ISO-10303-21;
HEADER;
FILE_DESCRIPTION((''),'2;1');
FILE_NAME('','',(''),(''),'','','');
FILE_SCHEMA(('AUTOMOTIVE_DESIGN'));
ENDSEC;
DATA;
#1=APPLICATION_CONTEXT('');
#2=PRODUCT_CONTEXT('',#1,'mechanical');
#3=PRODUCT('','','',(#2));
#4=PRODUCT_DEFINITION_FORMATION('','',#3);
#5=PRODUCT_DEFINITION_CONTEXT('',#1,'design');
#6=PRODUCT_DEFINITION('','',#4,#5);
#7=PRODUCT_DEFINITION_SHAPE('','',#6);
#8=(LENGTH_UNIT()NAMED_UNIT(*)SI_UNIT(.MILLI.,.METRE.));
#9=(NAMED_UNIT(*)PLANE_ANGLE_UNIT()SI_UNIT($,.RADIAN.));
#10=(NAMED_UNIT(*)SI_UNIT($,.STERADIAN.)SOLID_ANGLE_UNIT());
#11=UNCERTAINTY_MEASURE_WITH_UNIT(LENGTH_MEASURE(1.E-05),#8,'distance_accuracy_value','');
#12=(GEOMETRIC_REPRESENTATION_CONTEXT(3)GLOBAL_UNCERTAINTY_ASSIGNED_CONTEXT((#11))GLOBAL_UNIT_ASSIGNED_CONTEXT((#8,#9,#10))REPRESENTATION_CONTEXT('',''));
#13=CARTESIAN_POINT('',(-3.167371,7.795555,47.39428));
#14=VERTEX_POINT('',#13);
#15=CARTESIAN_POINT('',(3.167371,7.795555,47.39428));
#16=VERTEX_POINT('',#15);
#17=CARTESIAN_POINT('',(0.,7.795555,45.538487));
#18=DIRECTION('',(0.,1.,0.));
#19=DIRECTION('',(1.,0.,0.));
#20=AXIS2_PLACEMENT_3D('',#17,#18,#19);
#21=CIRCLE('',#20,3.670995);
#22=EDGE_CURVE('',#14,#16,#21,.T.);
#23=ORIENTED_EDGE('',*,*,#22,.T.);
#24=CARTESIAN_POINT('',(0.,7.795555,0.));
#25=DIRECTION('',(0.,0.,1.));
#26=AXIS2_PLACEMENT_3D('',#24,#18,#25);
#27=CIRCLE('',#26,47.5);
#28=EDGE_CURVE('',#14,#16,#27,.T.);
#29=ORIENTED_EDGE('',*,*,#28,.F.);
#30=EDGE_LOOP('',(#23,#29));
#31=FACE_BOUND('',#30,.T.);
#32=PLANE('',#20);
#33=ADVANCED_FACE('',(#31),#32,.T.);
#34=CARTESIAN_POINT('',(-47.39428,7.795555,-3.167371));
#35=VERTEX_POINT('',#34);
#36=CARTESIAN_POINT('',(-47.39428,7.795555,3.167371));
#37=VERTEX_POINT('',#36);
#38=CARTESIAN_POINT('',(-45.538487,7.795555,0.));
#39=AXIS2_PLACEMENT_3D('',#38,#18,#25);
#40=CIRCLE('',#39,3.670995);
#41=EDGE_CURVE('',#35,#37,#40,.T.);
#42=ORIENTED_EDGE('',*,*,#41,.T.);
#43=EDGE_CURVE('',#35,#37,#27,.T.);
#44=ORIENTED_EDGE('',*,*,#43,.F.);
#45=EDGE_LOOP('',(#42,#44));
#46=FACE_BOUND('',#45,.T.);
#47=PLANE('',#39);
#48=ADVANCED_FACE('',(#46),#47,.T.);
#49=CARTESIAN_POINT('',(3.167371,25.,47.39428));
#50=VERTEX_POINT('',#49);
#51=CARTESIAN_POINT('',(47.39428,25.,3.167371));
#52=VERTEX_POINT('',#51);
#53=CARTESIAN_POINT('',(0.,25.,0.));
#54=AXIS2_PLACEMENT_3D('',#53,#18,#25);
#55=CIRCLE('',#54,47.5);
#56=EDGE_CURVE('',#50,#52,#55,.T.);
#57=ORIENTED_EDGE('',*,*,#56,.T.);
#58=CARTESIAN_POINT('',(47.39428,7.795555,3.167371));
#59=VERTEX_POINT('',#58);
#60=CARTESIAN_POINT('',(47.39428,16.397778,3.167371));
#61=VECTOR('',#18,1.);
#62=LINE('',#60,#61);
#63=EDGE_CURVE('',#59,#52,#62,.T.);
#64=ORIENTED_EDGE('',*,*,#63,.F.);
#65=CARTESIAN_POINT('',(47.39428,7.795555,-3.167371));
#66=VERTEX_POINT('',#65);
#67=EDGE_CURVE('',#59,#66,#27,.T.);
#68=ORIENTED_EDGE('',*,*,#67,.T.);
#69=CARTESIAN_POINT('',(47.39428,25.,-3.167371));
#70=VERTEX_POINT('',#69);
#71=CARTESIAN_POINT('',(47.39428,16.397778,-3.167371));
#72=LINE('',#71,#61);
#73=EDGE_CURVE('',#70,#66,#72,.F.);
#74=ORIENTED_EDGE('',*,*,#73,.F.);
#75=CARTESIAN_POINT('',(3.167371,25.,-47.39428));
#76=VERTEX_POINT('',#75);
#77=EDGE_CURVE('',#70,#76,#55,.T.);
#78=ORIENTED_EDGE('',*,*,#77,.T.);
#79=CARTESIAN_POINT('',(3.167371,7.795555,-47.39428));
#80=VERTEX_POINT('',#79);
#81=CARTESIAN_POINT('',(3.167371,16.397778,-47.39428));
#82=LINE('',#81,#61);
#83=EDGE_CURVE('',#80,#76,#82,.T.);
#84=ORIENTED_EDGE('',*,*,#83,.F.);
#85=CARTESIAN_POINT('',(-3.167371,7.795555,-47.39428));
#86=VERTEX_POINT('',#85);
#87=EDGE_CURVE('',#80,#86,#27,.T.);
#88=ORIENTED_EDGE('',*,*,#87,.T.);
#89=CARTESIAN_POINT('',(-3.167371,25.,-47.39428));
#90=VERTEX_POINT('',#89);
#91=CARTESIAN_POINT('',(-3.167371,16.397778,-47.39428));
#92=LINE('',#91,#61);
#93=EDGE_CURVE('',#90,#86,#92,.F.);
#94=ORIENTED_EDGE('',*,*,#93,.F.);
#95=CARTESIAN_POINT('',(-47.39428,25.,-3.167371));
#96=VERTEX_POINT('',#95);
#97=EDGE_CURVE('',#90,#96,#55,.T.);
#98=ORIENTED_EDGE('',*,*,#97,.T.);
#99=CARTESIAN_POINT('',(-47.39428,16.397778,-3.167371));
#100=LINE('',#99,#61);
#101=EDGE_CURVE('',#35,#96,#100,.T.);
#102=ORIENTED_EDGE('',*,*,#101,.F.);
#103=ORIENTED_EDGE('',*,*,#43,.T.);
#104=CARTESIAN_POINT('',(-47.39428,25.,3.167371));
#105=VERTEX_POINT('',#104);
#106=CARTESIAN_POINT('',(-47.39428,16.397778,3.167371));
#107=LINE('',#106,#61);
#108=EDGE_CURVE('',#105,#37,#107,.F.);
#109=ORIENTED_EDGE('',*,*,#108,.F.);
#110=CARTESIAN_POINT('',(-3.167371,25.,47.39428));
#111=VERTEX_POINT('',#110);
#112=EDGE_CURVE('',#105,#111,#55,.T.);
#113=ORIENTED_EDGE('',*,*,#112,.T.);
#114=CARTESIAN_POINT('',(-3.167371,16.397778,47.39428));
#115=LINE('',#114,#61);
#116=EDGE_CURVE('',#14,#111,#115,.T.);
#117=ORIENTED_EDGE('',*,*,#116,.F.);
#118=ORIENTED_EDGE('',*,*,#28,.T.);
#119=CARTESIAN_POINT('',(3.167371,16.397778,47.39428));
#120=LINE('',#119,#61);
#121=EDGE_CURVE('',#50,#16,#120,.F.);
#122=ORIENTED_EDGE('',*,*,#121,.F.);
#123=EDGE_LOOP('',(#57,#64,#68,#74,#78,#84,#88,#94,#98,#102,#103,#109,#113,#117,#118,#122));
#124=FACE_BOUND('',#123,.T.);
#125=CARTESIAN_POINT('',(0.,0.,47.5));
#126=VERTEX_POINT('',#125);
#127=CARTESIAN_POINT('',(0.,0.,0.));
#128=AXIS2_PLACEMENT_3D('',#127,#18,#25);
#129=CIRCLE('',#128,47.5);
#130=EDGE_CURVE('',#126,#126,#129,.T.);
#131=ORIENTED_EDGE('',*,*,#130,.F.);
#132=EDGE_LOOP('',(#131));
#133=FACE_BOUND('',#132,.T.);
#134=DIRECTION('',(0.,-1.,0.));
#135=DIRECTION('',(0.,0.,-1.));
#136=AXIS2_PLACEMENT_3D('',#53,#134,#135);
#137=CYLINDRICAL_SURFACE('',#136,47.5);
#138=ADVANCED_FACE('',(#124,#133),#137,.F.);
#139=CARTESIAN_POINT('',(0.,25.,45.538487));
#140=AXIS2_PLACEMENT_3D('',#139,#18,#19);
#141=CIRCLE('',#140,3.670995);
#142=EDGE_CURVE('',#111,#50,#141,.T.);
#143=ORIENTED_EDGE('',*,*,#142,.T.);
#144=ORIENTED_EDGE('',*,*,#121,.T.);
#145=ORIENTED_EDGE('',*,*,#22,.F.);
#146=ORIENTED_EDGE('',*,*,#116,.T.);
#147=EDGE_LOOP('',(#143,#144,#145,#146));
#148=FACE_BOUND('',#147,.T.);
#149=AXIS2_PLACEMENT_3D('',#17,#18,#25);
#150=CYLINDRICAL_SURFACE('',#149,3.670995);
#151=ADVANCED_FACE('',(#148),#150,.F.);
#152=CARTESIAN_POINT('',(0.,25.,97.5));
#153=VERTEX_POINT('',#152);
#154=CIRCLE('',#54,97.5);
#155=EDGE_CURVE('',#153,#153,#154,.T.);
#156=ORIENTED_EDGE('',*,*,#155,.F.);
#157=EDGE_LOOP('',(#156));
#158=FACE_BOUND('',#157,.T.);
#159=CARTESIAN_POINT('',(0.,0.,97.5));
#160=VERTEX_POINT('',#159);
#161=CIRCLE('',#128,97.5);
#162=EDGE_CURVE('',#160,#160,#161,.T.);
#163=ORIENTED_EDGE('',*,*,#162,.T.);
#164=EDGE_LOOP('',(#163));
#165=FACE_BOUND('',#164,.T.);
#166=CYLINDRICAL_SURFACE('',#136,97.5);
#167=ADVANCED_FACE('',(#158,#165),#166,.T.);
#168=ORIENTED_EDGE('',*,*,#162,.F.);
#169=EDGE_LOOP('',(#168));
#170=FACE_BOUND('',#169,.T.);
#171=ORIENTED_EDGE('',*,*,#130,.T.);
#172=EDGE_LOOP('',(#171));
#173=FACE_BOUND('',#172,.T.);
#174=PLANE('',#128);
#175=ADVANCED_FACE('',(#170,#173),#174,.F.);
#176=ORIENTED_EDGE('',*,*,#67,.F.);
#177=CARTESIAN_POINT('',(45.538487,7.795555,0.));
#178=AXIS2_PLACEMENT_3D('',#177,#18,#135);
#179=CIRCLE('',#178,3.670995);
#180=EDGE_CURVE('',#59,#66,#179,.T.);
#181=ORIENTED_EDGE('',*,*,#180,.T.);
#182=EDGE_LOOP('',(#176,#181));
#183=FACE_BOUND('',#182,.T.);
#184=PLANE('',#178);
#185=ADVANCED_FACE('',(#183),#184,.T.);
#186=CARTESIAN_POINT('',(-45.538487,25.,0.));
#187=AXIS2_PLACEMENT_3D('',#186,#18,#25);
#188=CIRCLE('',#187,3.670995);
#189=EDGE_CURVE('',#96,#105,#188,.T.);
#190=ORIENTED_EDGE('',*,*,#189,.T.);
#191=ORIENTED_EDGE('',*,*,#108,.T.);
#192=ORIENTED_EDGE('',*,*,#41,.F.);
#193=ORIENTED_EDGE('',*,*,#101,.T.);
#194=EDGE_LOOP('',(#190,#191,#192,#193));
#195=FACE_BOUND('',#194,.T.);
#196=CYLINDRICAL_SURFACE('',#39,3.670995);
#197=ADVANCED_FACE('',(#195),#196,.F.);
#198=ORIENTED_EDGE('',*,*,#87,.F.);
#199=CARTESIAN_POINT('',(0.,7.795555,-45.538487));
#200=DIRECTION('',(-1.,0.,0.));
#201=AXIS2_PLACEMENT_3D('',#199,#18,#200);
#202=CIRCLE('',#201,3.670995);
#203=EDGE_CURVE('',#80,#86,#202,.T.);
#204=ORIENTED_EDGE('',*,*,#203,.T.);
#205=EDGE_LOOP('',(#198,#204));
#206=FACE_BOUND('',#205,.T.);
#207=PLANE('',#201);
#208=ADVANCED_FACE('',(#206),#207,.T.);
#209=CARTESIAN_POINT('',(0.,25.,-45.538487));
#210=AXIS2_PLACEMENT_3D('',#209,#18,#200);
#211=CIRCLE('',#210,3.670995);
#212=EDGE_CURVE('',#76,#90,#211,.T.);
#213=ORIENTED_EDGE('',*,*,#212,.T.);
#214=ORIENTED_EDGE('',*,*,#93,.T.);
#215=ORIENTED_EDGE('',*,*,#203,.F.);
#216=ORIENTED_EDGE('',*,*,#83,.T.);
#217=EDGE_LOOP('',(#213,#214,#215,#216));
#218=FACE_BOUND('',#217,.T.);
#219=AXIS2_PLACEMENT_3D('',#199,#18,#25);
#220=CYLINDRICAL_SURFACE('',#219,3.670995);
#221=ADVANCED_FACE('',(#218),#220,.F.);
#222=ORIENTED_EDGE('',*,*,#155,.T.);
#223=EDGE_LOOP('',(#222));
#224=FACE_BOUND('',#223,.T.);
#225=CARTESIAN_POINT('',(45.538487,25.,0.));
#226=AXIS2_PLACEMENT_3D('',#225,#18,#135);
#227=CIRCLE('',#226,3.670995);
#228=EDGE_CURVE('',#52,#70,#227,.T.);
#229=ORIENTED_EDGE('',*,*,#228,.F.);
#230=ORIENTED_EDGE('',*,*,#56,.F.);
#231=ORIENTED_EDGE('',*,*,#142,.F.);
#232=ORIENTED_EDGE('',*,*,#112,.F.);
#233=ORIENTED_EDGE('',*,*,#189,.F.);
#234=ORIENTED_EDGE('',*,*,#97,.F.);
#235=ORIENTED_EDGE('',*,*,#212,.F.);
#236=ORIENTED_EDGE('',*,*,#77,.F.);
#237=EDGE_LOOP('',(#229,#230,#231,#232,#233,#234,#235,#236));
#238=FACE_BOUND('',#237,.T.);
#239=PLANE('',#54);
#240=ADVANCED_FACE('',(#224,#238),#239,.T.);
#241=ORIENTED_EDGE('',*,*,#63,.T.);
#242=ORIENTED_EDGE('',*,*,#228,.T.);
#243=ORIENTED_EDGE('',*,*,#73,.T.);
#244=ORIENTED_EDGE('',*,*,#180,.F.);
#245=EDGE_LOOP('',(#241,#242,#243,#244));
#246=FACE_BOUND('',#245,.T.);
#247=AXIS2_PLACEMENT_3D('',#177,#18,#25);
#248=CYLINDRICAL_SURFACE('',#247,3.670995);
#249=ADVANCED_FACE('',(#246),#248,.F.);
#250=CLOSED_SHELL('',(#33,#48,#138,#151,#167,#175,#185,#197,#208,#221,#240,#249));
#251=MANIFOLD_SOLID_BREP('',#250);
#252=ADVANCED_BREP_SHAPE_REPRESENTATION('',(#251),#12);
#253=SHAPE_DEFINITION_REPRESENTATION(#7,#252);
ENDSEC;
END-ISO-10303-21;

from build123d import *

# Parameters (mm, degrees)
SKETCH1_R           = 97.5
BOSS_EXTRUDE1_DEPTH = 25
SKETCH2_R           = 47.5
CUT_EXTRUDE1_DEPTH  = 141.133864572
SKETCH3_R           = 3.670995235
CUT_EXTRUDE2_DEPTH  = 17.204444502
CIRPATTERN1_COUNT   = 4


with BuildPart() as part:
    # Sketch1 → Boss-Extrude1 (new body)
    with BuildSketch(Plane(origin=(0, 0, 0), x_dir=(1, 0, 0), z_dir=(0, 1, 0))):
        Circle(SKETCH1_R)
    extrude(amount=BOSS_EXTRUDE1_DEPTH)

    # Sketch2 → Cut-Extrude1 (cut, through all)
    with BuildSketch(Plane(origin=(0, 0, 0), x_dir=(1, 0, 0), z_dir=(0, 1, 0))):
        Circle(SKETCH2_R)
    extrude(amount=CUT_EXTRUDE1_DEPTH, mode=Mode.SUBTRACT)

    # Sketch3 → Cut-Extrude2 (cut)
    with BuildSketch(Plane(origin=(0, 25, 0), x_dir=(1, 0, 0), z_dir=(0, 1, 0))):
        with Locations((-45.538487006, 0)):
            Circle(SKETCH3_R)
    cut_extrude2 = extrude(amount=-CUT_EXTRUDE2_DEPTH, mode=Mode.SUBTRACT)

    # CirPattern1: Cut-Extrude2 ×4 about axis
    cirpattern1_axis = Axis((0, 0, 0), (0, 1, 0))
    for i in range(1, CIRPATTERN1_COUNT):
        add(cut_extrude2.rotate(cirpattern1_axis, i * 360 / CIRPATTERN1_COUNT), mode=Mode.SUBTRACT)


solid = part.part
